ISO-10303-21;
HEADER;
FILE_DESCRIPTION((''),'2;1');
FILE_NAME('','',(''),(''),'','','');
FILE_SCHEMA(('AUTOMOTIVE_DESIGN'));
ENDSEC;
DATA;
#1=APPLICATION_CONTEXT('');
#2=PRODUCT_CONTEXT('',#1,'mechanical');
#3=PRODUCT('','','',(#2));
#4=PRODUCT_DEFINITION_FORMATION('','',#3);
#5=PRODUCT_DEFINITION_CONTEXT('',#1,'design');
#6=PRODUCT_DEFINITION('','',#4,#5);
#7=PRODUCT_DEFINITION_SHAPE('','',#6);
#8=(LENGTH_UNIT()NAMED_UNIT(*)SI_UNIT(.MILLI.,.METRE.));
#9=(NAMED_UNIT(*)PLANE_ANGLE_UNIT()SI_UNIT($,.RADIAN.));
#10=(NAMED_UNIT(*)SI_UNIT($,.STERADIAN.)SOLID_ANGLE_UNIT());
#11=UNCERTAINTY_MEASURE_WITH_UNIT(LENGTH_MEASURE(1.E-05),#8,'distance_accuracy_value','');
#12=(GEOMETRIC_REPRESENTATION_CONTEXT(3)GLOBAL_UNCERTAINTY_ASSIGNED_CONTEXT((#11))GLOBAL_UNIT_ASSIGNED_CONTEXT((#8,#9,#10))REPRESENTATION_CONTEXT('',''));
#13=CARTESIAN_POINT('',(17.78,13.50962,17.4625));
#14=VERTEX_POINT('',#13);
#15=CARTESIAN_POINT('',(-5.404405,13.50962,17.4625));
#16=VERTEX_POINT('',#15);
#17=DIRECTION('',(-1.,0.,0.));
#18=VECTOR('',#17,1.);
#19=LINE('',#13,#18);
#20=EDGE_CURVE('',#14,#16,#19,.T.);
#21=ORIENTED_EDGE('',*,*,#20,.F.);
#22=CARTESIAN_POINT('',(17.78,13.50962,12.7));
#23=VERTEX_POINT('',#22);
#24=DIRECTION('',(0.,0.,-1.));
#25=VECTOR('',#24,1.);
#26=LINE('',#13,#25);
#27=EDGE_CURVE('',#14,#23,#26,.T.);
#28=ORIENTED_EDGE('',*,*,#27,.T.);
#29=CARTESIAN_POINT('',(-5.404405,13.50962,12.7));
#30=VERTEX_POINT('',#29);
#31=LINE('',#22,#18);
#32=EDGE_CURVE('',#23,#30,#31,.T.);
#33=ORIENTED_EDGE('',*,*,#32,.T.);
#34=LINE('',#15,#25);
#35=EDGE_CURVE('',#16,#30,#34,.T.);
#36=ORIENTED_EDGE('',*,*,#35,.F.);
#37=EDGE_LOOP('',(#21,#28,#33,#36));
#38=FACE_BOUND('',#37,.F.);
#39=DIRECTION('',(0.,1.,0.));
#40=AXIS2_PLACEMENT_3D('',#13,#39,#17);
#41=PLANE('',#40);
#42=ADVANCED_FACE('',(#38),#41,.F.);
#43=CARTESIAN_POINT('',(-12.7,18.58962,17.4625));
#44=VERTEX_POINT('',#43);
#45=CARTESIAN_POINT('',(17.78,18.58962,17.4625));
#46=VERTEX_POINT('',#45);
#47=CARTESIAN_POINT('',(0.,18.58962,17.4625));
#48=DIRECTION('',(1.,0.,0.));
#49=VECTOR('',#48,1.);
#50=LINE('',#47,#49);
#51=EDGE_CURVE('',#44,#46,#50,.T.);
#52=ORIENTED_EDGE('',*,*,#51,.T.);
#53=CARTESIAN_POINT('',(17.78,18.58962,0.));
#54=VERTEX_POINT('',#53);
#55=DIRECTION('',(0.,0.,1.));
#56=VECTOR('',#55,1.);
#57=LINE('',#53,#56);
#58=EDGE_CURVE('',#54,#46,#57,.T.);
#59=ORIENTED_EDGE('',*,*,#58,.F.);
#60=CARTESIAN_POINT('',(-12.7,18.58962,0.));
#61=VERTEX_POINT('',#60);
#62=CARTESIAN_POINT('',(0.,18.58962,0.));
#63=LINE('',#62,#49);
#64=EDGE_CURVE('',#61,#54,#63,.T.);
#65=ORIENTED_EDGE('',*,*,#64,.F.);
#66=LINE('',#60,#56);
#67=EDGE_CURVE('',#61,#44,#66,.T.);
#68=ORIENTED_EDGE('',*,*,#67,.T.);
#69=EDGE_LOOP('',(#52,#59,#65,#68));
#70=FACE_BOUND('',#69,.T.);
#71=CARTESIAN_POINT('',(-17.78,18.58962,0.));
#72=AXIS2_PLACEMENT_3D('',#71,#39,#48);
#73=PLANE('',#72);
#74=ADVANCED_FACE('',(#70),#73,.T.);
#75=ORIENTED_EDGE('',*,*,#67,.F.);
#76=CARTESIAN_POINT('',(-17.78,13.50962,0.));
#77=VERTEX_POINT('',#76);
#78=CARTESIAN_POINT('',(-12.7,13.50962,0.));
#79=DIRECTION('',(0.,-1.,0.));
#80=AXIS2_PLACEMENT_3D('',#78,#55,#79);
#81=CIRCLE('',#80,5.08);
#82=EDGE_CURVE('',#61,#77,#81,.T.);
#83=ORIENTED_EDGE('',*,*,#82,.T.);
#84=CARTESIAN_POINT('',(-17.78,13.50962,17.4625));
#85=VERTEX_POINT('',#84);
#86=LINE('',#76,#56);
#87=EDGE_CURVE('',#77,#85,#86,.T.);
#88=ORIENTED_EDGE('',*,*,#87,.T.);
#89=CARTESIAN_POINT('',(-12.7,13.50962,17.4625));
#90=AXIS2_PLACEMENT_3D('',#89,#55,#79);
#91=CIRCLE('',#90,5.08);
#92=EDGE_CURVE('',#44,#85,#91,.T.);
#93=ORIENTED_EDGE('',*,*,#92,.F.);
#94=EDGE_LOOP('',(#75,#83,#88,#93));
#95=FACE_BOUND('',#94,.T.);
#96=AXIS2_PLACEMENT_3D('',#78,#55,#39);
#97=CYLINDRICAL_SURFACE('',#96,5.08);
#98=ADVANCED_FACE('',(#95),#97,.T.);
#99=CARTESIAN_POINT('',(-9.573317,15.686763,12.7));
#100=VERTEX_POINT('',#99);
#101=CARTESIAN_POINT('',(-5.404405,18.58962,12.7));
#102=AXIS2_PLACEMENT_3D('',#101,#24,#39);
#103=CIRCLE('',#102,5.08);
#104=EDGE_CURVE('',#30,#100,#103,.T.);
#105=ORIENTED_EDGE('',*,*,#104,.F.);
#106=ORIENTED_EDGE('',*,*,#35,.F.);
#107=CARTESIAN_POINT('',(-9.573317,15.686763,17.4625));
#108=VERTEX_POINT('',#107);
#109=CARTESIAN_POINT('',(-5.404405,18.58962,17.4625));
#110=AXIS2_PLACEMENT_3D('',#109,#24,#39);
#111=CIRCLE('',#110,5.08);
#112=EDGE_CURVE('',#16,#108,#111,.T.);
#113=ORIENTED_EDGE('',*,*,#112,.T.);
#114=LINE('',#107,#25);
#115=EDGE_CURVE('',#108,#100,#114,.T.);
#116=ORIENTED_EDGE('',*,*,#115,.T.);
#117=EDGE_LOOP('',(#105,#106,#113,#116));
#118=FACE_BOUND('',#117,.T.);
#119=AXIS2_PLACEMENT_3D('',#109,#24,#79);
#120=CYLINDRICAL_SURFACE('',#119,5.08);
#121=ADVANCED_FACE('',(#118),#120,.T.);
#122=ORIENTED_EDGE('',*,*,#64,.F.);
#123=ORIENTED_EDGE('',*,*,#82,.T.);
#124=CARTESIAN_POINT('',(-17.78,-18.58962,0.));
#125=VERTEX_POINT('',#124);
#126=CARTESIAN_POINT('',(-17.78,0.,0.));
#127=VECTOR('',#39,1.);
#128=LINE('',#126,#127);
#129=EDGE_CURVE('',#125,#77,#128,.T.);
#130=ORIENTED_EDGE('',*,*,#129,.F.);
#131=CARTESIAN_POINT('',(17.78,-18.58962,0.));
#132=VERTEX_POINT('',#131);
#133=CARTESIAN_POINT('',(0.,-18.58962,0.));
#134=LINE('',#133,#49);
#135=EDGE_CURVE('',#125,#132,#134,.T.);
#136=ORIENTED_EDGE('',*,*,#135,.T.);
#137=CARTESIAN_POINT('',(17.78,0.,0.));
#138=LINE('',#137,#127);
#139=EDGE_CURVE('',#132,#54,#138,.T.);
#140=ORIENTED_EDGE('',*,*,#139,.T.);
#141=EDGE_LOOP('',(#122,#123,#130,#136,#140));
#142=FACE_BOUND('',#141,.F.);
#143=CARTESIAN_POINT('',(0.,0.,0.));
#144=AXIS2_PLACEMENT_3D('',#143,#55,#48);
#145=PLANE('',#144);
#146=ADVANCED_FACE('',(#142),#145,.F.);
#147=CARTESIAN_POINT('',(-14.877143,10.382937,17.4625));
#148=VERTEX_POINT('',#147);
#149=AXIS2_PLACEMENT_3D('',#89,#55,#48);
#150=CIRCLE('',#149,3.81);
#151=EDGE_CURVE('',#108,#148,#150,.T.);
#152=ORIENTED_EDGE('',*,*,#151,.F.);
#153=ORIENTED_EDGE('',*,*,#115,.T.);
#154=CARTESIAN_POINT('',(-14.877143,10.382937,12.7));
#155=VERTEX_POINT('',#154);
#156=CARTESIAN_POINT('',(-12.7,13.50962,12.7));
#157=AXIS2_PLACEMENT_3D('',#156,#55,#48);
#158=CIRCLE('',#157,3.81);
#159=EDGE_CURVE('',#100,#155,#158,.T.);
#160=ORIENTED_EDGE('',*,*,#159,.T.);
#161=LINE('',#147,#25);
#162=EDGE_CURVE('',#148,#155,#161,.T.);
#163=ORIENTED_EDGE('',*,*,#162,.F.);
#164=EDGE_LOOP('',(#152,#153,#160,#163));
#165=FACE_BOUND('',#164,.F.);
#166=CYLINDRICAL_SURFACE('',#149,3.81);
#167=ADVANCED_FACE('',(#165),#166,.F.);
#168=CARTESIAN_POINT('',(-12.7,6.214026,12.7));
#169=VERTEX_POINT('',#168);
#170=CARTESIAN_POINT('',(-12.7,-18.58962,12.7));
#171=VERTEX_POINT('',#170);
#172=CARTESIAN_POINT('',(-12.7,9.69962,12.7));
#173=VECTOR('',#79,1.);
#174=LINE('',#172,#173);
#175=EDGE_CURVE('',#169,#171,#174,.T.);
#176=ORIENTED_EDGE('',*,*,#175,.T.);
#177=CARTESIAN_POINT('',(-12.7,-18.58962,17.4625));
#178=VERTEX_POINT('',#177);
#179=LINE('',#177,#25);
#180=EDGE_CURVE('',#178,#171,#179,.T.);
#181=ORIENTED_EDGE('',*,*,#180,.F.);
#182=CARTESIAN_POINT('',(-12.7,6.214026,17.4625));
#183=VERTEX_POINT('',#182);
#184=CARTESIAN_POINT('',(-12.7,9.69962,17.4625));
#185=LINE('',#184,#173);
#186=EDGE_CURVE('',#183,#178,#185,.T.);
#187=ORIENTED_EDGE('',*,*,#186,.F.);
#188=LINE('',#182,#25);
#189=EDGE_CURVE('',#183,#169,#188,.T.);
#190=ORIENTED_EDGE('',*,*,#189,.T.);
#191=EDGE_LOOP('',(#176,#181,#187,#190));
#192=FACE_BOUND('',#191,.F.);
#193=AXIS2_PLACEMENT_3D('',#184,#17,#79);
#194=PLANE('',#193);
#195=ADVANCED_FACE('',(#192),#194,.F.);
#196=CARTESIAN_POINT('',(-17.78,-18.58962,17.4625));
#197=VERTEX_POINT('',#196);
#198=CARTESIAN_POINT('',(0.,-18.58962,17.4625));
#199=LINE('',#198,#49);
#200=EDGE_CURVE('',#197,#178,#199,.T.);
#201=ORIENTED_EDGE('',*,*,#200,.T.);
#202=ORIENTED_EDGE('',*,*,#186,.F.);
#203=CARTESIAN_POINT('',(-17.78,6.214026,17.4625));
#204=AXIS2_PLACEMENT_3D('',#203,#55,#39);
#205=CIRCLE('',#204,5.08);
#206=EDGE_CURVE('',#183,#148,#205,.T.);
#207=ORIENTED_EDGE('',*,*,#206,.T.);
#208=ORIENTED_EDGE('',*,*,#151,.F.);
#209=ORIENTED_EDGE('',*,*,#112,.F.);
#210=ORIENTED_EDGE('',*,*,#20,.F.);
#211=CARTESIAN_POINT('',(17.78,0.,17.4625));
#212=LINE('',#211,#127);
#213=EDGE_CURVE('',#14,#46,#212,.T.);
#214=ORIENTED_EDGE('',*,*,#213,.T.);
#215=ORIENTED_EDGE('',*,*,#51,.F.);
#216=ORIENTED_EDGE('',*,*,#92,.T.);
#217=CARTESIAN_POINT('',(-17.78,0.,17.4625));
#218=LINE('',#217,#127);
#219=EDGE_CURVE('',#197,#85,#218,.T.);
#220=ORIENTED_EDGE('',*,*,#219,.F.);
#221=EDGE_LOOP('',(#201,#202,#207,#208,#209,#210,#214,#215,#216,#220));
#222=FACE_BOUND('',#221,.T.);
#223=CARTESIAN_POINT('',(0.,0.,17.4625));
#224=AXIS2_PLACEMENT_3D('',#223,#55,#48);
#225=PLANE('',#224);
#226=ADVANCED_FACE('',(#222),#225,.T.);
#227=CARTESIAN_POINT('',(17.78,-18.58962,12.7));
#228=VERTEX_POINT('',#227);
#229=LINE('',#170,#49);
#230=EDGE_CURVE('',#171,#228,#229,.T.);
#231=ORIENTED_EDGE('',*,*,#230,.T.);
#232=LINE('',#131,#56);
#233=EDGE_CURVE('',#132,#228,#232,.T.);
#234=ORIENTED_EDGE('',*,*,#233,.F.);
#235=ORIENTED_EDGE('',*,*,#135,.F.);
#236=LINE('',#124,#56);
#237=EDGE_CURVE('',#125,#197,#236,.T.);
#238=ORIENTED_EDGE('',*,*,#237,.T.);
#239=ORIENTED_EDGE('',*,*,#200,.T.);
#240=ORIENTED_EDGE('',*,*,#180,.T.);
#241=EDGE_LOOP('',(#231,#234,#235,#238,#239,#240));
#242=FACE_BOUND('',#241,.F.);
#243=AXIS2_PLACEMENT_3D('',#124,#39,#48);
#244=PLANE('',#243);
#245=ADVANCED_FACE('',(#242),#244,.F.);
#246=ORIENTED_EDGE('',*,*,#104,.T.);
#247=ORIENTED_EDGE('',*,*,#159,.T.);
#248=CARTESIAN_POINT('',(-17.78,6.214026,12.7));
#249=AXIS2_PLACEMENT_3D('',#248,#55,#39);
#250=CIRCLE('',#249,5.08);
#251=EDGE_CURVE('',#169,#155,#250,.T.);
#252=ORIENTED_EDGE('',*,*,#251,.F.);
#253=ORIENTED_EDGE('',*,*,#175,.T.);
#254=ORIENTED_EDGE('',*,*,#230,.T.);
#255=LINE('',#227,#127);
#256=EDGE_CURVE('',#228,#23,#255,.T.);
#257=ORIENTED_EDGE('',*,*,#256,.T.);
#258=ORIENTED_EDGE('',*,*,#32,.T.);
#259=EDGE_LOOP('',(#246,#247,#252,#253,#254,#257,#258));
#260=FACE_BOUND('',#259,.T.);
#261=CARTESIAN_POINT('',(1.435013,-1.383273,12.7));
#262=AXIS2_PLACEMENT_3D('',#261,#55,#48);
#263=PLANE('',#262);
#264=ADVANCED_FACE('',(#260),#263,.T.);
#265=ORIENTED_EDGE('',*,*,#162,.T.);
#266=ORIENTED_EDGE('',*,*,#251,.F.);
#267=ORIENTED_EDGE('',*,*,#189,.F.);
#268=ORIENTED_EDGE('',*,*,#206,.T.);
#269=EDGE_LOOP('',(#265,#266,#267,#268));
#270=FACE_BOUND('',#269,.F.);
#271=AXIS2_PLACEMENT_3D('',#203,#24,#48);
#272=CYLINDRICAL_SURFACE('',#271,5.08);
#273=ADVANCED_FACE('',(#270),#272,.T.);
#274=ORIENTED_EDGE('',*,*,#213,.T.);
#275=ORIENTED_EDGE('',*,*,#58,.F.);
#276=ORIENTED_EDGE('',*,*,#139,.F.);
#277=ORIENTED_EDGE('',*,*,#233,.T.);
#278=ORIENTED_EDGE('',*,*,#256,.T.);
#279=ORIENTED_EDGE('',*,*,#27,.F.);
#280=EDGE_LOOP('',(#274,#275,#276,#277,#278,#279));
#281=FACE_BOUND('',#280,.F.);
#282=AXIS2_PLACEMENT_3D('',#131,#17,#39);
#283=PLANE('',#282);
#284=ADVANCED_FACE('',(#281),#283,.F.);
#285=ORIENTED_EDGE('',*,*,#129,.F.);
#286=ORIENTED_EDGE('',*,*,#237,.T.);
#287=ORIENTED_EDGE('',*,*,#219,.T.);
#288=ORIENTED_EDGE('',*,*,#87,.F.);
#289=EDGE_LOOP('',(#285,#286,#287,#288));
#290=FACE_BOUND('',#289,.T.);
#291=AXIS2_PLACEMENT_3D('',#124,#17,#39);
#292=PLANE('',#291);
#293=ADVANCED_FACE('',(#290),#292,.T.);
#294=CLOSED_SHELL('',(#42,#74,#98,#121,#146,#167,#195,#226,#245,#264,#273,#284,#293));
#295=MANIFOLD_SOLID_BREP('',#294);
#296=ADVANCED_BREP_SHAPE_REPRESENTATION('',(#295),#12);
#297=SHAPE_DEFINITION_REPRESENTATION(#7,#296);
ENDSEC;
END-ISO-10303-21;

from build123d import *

# Parameters (mm, degrees)
F0_W     = 35.56
F0_H     = 37.1792408654
F1_DEPTH = 17.4625
F3_DEPTH = 4.7625
F4_R     = 5.08
F5_R     = 5.08


# Not quite as in the source:
# - a length typed as a fraction of an inch, garbled in the dataset ("3 / 203.2 mm" for 3/8 in), is restored


with BuildPart() as f1:
    # F0 (on Top) → F1 (new body)
    with BuildSketch(Plane.XY):
        Rectangle(F0_W, F0_H)
    extrude(amount=F1_DEPTH)

    # F2 (on face) → F3 (cut)
    with BuildSketch(Plane.XY.offset(17.4625)):
        with BuildLine():
            Line((-12.7, -18.5896204327), (17.78, -18.5896204327))
            Line((17.78, -18.5896204327), (17.78, 13.5096204327))
            Line((17.78, 13.5096204327), (-8.89, 13.5096204327))
            ThreePointArc((-8.89, 13.5096204327), (-15.3940768363, 16.203697269), (-12.7, 9.6996204327))
            Line((-12.7, 9.6996204327), (-12.7, -18.5896204327))
        make_face()
    extrude(amount=-F3_DEPTH, mode=Mode.SUBTRACT)

    # F4
    f4_edges = [f1.edges().sort_by_distance(p)[0] for p in [
        (-12.7, 9.69962, 15.08125),
        (-8.89, 13.50962, 15.08125),
    ]]
    fillet(f4_edges, radius=F4_R)

    # F5
    f5_edges = [f1.edges().sort_by_distance(p)[0] for p in [
        (-17.78, 18.58962, 8.73125),
    ]]
    fillet(f5_edges, radius=F5_R)


solid = f1.part
